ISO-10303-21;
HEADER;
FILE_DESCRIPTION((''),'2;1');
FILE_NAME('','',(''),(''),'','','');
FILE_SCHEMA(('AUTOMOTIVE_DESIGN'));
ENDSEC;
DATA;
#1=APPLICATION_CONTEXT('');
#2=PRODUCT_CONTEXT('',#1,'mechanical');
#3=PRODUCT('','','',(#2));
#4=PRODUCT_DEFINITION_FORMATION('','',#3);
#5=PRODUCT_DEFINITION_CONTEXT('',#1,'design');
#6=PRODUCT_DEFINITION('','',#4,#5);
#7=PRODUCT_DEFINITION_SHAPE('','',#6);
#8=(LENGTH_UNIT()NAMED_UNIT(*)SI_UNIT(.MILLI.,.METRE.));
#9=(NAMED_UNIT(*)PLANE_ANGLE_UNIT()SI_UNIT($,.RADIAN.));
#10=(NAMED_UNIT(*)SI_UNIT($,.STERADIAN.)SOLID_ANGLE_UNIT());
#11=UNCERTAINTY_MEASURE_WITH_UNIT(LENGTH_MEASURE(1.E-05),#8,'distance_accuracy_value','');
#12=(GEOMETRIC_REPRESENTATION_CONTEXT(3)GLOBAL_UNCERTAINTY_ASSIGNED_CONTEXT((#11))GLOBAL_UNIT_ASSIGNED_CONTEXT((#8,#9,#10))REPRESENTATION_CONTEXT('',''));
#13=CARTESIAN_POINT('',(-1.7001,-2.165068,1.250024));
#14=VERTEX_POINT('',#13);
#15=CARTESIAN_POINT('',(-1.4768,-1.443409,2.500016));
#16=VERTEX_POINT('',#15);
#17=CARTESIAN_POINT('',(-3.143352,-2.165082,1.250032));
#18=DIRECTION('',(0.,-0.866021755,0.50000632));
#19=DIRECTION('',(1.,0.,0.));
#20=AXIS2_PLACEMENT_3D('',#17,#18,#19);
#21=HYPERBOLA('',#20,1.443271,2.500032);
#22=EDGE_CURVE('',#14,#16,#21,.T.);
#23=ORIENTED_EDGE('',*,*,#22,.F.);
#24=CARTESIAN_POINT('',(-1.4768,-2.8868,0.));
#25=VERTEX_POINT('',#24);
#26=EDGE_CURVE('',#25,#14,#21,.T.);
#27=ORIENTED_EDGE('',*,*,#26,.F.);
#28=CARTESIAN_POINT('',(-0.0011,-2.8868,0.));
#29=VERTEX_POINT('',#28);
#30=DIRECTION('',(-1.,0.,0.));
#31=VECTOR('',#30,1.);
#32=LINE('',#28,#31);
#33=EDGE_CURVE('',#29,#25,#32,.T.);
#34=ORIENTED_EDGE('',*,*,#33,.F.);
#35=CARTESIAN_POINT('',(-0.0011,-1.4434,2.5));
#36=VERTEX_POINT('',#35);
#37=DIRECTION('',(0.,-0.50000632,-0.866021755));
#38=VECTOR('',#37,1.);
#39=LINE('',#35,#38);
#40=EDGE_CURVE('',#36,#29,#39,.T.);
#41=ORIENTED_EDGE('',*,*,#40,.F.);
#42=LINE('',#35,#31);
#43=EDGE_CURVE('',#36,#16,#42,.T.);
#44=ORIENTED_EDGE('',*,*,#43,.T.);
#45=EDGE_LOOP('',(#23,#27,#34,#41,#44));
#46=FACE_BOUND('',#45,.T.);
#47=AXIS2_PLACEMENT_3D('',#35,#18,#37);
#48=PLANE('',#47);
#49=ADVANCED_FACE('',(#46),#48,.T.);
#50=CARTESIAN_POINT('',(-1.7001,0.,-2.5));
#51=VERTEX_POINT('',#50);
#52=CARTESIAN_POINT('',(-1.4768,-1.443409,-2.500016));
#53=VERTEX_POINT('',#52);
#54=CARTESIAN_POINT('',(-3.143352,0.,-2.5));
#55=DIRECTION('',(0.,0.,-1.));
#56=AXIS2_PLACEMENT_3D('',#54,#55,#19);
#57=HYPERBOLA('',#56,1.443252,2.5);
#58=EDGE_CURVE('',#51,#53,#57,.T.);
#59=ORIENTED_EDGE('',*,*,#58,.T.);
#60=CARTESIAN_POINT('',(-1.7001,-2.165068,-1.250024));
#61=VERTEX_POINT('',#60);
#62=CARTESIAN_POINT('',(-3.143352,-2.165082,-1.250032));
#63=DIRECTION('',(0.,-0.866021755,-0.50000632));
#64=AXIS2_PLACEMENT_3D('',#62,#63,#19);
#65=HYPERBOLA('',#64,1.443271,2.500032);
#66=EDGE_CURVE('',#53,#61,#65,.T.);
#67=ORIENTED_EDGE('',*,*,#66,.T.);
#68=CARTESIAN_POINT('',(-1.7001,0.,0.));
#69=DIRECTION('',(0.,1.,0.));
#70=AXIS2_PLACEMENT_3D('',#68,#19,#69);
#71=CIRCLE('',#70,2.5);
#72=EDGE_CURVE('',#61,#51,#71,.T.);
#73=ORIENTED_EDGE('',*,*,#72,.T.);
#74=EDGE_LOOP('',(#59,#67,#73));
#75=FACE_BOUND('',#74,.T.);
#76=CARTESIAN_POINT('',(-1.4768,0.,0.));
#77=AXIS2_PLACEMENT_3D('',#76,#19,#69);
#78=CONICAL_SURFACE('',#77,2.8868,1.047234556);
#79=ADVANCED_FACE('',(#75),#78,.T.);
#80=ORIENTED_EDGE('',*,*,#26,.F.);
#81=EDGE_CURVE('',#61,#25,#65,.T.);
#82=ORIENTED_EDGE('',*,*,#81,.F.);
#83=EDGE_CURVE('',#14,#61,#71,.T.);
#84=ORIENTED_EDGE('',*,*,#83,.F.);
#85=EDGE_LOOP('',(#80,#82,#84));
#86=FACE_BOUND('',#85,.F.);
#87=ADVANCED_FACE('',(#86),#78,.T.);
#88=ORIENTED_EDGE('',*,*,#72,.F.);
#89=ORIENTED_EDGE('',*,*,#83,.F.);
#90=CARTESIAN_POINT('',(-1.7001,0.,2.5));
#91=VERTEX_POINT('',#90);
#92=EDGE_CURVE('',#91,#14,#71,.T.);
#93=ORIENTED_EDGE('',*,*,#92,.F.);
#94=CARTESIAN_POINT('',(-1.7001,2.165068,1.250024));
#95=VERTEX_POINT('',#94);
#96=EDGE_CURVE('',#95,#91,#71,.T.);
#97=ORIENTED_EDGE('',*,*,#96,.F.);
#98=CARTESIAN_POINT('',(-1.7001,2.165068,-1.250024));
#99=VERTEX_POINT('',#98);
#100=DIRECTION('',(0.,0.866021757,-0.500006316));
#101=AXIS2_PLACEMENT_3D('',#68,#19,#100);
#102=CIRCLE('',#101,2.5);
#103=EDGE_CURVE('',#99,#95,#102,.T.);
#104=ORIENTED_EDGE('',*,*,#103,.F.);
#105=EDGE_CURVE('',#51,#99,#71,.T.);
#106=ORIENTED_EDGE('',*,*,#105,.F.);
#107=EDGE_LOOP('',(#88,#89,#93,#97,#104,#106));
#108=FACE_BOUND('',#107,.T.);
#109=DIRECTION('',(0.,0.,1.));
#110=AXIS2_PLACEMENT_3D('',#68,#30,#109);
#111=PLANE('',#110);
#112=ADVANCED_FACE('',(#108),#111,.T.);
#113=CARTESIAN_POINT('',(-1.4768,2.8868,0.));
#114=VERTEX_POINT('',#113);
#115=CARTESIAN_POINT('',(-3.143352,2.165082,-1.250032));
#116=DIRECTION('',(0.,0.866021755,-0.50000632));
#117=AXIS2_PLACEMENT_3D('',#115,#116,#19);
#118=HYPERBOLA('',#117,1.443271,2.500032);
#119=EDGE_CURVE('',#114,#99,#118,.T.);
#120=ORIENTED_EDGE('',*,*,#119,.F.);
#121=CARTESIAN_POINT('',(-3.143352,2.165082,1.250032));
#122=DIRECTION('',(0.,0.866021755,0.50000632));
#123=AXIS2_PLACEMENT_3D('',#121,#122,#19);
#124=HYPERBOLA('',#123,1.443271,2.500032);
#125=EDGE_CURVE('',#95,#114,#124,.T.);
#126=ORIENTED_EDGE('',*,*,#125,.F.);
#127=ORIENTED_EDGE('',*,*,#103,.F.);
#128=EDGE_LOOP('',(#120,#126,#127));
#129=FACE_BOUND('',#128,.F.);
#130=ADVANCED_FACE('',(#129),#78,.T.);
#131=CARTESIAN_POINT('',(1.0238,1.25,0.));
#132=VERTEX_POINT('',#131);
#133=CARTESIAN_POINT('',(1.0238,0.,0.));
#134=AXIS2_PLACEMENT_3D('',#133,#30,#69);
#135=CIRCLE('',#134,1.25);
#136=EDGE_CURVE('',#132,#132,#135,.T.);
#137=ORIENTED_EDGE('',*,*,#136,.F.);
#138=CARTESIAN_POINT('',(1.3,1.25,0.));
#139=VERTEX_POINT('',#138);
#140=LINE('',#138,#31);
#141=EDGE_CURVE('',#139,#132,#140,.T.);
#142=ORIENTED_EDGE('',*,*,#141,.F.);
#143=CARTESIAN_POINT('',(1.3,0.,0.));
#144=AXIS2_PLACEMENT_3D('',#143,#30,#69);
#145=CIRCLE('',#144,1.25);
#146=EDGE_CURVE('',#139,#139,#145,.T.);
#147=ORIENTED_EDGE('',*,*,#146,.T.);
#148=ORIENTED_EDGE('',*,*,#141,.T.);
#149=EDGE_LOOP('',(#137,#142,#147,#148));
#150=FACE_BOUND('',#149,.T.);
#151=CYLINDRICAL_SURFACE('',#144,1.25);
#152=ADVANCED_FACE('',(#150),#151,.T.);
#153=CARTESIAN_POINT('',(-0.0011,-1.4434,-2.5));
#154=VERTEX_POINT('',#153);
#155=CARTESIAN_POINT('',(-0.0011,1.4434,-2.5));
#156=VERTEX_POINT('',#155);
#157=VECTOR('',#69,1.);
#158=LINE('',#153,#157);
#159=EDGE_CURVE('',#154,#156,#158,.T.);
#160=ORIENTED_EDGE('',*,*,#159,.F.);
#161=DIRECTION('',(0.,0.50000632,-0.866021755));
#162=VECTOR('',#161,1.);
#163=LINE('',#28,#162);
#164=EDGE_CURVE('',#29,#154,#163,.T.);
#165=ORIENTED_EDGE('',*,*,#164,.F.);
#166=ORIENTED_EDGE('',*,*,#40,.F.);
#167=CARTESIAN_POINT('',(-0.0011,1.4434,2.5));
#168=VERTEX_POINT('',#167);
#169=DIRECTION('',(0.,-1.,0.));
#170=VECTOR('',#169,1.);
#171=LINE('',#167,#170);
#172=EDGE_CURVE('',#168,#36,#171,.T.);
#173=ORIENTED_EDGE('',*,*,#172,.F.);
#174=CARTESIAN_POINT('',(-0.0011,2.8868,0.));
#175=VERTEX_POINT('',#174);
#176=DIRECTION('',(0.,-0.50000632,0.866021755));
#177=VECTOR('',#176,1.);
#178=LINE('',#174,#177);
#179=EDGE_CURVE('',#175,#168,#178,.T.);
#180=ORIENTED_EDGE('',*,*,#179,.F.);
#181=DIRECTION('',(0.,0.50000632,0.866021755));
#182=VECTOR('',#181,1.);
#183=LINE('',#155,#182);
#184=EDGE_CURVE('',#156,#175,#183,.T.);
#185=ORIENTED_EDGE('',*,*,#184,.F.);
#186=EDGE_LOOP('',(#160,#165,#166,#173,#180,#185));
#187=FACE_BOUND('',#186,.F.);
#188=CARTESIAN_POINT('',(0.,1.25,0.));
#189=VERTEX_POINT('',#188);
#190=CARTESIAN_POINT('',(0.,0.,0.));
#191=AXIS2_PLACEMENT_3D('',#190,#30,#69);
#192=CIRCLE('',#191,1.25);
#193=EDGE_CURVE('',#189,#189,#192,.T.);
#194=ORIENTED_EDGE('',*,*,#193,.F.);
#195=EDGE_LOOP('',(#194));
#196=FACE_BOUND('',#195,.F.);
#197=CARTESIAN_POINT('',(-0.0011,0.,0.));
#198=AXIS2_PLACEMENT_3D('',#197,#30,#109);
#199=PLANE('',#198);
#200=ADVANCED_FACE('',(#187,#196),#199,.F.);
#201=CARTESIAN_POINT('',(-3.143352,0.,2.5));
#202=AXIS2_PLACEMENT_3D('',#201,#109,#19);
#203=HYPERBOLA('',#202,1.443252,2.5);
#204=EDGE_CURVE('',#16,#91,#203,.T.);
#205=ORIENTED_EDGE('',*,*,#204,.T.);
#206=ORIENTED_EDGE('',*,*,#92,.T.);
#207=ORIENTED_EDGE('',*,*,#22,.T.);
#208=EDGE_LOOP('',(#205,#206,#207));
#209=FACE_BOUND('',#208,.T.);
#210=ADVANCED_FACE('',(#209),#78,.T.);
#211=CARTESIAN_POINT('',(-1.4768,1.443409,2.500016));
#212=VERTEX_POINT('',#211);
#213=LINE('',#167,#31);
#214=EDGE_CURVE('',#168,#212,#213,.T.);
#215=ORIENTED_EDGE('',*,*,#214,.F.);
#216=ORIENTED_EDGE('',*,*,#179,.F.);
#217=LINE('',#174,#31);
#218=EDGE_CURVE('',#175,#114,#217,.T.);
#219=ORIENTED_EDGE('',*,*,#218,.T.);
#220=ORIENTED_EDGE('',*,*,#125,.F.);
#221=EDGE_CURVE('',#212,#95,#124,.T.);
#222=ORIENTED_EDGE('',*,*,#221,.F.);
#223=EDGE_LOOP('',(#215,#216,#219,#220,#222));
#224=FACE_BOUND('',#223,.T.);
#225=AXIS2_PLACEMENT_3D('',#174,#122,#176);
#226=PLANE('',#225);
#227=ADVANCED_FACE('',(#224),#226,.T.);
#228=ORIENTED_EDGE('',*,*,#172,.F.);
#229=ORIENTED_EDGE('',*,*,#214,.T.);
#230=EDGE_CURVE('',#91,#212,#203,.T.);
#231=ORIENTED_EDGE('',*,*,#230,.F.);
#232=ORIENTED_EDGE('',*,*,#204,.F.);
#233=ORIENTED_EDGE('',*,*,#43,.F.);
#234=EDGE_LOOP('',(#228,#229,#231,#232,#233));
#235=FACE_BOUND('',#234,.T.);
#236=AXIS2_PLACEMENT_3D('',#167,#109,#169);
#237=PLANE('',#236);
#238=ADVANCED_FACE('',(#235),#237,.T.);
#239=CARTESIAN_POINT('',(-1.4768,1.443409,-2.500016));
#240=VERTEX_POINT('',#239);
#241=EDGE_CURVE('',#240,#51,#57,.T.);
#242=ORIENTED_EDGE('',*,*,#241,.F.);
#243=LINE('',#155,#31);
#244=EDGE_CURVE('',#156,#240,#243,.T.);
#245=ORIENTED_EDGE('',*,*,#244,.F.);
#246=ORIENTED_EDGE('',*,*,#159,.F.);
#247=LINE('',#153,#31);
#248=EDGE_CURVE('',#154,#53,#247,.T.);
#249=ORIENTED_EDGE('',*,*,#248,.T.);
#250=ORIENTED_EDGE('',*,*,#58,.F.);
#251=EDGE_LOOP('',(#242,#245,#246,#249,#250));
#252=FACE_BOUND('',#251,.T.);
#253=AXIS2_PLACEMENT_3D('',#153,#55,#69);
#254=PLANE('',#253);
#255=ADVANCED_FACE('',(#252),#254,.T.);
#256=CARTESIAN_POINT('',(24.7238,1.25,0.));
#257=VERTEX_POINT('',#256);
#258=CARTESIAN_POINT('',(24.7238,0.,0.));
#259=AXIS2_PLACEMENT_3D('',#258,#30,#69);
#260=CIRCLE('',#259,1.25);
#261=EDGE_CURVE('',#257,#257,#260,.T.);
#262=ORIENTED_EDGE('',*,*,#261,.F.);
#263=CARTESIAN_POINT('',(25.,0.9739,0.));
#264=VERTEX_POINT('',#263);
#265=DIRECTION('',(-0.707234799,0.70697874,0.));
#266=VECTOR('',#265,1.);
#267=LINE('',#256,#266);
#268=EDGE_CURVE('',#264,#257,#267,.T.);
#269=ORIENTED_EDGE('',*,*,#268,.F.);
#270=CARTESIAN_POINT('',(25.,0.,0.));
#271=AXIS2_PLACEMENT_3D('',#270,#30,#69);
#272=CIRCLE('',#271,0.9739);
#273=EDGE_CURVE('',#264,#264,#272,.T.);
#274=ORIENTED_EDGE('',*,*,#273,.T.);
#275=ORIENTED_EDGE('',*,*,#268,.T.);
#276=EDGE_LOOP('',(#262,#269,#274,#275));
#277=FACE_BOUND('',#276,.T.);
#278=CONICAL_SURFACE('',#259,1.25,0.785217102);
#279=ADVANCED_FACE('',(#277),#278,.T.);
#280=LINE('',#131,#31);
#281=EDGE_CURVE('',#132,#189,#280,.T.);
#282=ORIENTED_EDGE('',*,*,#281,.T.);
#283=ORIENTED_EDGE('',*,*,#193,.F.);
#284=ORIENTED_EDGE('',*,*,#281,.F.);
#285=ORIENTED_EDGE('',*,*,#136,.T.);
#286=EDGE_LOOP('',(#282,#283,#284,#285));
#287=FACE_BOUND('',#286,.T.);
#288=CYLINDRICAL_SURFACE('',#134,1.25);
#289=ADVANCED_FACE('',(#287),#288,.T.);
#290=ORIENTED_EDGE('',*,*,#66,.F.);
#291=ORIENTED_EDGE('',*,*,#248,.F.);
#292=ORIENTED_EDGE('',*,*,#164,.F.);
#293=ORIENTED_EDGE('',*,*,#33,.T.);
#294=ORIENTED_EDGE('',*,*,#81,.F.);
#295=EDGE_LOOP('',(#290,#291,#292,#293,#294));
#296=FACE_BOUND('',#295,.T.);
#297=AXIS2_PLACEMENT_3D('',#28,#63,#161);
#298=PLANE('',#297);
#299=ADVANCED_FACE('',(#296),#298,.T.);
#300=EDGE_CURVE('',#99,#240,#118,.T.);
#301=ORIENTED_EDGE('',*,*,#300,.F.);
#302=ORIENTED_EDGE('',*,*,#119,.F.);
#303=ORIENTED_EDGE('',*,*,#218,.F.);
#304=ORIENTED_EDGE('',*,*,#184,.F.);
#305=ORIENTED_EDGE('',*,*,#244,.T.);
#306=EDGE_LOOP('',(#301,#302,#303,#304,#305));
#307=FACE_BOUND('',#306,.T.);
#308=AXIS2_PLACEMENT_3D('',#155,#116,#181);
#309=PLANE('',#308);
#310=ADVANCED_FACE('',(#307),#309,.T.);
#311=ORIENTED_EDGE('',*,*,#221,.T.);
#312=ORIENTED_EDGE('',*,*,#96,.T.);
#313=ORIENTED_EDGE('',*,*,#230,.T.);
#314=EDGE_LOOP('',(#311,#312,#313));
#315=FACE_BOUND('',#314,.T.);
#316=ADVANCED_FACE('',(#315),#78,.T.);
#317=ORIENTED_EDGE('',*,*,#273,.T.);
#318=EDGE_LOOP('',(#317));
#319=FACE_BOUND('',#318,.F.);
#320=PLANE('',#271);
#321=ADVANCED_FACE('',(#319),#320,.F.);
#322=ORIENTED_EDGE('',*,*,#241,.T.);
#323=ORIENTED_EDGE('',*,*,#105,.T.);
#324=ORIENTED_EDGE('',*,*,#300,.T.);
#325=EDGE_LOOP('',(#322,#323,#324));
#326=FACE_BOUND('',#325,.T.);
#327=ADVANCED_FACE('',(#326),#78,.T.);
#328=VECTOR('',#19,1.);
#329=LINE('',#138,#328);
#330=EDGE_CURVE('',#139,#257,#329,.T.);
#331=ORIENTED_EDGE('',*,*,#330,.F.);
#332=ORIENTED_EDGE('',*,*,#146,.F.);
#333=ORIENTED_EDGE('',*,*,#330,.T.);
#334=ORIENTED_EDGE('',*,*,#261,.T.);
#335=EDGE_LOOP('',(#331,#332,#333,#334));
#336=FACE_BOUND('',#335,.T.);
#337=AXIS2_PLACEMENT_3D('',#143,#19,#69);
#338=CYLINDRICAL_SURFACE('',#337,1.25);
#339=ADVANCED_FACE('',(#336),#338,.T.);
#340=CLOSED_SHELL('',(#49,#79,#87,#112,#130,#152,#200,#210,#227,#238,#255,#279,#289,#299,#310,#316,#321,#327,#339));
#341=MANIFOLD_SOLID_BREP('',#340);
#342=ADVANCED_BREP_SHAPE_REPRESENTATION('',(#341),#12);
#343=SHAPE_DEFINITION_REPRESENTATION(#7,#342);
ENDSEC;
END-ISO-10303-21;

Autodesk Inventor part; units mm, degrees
ref_plane "YZ Plane" through (0, 0, 0) normal (1, 0, 0) x (0, 1, 0)
ref_plane "XZ Plane" through (0, 0, 0) normal (0, 1, 0) x (-1, 0, 0)
sketch "Sketch1" plane through (0, 0, 0) normal (0, 0, 1) x (1, 0, 0)
  line L0 (0, 2.5) -> (0, 1.25)
  line L1 (1.3, 1.25) -> (25, 1.25)
  line L2 (25, 1.25) -> (25, 0)
  line L3 (25, 0) -> (-0.0011, 0)
  line L4 (-5.0013, 0) -> (30.0002, 0) projected
  line L5 (-0.0011, 0) -> (-0.0011, 2.5)
  line L6 (-0.0011, 2.5) -> (0, 2.5)
  line L7 (1.3, 1.25) -> (1.0238, 1.25)
  line L8 (1.0238, 1.25) -> (0, 1.25)
  line L9 (0, -0.5) -> (0, 3) projected
  dimension "d0" = 25
  dimension "d1" = 23.7
  dimension "d2" = 2.5
  dimension "d9" = 0.0011
  dimension "d10" = 5
  dimension "d13" = 0.2762
  dimension "d14" = 2.5
revolve "Body" add sketch "Sketch1" angle 360 about axis through (25, 0, 0) along (-1, 0, 0)
sketch "Sketch2" plane through (-0.0011, 0, 0) normal (-1, 0, 0) x (0, 0, 1)
  line L0 (0, 2.8868) -> (2.5, 1.4434)
  line L1 (2.5, 1.4434) -> (2.5, -1.4434)
  line L2 (2.5, -1.4434) -> (0, -2.8868)
  line L3 (0, -2.8868) -> (-2.5, -1.4434)
  line L4 (-2.5, -1.4434) -> (-2.5, 1.4434)
  line L5 (-2.5, 1.4434) -> (0, 2.8868)
  point P0 (0, 0)
  point P1 (0, 0)
  dimension "d11" = 5
extrude "Head" add sketch "Sketch2" along normal blind 1.699
sketch "Sketch4" plane through (0, 0, 0) normal (0, 0, 1) x (1, 0, 0)
  line L0 (-1.7001, 2.5) -> (-1.7001, 2.8868)
  line L1 (-1.7001, 2.8868) -> (-1.4768, 2.8868)
  line L2 (-1.4768, 2.8868) -> (-1.7001, 2.5)
  line L3 (-2.0399, 0) -> (0.3387, 0) projected
  line L4 (-0.0011, 2.8868) -> (-1.7001, 2.8868) projected
  line L5 (-1.7001, 1.4434) -> (-1.7001, 2.8868) projected
  dimension "d5" = 30
  dimension "d19" = 5
revolve "Chamfer1" cut sketch "Sketch4" angle 360 about axis through (-10, 0, 0) along (1, 0, 0)
thread "Thread" size "M2.5x0.45" class "6g" standard "ISO Metric profile" length 23.7
chamfer "Chamfer2" distance 0.2761 distance2 0.2762 1 edges at (25, -1.25, 0) measured on face at (25, -0.4983, 0.4802)
ref_plane "Work Plane1" through (1.525, 0, 0) normal (0, 0, 1) x (1, 0, 0)
equation "\"d0\" = NLG"
equation "\"d1\" = GEL"
equation "\"d2\" = GD"
equation "\"d10\" = SD2"
equation "\"d14\" = BDM"
equation "\"d11\" = SW"
equation "\"d3\" = KOH - SD"
equation "\"d5\" = ANG1"
equation "\"d19\" = SW0"
equation "\"d15\" = GEL"
equation "\"d6\" = -0.5 * SPD + 0.5 * GD"
equation "\"NLG\" = 25"
equation "\"GD\" = NND"
equation "\"BDM\" = NND"
equation "\"KOH\" = 1.7"
equation "\"GEL\" = 23.7"
equation "\"SW\" = 5"
equation "\"SW0\" = SW"
equation "\"SPD\" = NND - 1.2269 * PTC"
equation "\"SD2\" = SW"
equation "\"SD\" = 0.001"
equation "\"ANG1\" = 30deg"
equation "\"GAL\" = 0.61345 * PTC"
equation "\"GUL\" = 0.61345 * PTC"
equation "\"RR\" = 0.001"
equation "\"WFT\" = SD"
equation "\"GD1\" = THREADDIA - 1.2269 * PTC"
equation "\"THREADDIA\" = 2.5"
equation "\"SDH\" = SW"
equation "\"TOA\" = 30deg"
equation "\"FAWI\" = 45deg"
equation "\"PTC\" = 0.45"
equation "\"NND\" = 2.5"
equation "\"E0\" = 1.155 * SW"
properties part number "AS 1110 - M2,5 x 25" material "Steel, Mild"
